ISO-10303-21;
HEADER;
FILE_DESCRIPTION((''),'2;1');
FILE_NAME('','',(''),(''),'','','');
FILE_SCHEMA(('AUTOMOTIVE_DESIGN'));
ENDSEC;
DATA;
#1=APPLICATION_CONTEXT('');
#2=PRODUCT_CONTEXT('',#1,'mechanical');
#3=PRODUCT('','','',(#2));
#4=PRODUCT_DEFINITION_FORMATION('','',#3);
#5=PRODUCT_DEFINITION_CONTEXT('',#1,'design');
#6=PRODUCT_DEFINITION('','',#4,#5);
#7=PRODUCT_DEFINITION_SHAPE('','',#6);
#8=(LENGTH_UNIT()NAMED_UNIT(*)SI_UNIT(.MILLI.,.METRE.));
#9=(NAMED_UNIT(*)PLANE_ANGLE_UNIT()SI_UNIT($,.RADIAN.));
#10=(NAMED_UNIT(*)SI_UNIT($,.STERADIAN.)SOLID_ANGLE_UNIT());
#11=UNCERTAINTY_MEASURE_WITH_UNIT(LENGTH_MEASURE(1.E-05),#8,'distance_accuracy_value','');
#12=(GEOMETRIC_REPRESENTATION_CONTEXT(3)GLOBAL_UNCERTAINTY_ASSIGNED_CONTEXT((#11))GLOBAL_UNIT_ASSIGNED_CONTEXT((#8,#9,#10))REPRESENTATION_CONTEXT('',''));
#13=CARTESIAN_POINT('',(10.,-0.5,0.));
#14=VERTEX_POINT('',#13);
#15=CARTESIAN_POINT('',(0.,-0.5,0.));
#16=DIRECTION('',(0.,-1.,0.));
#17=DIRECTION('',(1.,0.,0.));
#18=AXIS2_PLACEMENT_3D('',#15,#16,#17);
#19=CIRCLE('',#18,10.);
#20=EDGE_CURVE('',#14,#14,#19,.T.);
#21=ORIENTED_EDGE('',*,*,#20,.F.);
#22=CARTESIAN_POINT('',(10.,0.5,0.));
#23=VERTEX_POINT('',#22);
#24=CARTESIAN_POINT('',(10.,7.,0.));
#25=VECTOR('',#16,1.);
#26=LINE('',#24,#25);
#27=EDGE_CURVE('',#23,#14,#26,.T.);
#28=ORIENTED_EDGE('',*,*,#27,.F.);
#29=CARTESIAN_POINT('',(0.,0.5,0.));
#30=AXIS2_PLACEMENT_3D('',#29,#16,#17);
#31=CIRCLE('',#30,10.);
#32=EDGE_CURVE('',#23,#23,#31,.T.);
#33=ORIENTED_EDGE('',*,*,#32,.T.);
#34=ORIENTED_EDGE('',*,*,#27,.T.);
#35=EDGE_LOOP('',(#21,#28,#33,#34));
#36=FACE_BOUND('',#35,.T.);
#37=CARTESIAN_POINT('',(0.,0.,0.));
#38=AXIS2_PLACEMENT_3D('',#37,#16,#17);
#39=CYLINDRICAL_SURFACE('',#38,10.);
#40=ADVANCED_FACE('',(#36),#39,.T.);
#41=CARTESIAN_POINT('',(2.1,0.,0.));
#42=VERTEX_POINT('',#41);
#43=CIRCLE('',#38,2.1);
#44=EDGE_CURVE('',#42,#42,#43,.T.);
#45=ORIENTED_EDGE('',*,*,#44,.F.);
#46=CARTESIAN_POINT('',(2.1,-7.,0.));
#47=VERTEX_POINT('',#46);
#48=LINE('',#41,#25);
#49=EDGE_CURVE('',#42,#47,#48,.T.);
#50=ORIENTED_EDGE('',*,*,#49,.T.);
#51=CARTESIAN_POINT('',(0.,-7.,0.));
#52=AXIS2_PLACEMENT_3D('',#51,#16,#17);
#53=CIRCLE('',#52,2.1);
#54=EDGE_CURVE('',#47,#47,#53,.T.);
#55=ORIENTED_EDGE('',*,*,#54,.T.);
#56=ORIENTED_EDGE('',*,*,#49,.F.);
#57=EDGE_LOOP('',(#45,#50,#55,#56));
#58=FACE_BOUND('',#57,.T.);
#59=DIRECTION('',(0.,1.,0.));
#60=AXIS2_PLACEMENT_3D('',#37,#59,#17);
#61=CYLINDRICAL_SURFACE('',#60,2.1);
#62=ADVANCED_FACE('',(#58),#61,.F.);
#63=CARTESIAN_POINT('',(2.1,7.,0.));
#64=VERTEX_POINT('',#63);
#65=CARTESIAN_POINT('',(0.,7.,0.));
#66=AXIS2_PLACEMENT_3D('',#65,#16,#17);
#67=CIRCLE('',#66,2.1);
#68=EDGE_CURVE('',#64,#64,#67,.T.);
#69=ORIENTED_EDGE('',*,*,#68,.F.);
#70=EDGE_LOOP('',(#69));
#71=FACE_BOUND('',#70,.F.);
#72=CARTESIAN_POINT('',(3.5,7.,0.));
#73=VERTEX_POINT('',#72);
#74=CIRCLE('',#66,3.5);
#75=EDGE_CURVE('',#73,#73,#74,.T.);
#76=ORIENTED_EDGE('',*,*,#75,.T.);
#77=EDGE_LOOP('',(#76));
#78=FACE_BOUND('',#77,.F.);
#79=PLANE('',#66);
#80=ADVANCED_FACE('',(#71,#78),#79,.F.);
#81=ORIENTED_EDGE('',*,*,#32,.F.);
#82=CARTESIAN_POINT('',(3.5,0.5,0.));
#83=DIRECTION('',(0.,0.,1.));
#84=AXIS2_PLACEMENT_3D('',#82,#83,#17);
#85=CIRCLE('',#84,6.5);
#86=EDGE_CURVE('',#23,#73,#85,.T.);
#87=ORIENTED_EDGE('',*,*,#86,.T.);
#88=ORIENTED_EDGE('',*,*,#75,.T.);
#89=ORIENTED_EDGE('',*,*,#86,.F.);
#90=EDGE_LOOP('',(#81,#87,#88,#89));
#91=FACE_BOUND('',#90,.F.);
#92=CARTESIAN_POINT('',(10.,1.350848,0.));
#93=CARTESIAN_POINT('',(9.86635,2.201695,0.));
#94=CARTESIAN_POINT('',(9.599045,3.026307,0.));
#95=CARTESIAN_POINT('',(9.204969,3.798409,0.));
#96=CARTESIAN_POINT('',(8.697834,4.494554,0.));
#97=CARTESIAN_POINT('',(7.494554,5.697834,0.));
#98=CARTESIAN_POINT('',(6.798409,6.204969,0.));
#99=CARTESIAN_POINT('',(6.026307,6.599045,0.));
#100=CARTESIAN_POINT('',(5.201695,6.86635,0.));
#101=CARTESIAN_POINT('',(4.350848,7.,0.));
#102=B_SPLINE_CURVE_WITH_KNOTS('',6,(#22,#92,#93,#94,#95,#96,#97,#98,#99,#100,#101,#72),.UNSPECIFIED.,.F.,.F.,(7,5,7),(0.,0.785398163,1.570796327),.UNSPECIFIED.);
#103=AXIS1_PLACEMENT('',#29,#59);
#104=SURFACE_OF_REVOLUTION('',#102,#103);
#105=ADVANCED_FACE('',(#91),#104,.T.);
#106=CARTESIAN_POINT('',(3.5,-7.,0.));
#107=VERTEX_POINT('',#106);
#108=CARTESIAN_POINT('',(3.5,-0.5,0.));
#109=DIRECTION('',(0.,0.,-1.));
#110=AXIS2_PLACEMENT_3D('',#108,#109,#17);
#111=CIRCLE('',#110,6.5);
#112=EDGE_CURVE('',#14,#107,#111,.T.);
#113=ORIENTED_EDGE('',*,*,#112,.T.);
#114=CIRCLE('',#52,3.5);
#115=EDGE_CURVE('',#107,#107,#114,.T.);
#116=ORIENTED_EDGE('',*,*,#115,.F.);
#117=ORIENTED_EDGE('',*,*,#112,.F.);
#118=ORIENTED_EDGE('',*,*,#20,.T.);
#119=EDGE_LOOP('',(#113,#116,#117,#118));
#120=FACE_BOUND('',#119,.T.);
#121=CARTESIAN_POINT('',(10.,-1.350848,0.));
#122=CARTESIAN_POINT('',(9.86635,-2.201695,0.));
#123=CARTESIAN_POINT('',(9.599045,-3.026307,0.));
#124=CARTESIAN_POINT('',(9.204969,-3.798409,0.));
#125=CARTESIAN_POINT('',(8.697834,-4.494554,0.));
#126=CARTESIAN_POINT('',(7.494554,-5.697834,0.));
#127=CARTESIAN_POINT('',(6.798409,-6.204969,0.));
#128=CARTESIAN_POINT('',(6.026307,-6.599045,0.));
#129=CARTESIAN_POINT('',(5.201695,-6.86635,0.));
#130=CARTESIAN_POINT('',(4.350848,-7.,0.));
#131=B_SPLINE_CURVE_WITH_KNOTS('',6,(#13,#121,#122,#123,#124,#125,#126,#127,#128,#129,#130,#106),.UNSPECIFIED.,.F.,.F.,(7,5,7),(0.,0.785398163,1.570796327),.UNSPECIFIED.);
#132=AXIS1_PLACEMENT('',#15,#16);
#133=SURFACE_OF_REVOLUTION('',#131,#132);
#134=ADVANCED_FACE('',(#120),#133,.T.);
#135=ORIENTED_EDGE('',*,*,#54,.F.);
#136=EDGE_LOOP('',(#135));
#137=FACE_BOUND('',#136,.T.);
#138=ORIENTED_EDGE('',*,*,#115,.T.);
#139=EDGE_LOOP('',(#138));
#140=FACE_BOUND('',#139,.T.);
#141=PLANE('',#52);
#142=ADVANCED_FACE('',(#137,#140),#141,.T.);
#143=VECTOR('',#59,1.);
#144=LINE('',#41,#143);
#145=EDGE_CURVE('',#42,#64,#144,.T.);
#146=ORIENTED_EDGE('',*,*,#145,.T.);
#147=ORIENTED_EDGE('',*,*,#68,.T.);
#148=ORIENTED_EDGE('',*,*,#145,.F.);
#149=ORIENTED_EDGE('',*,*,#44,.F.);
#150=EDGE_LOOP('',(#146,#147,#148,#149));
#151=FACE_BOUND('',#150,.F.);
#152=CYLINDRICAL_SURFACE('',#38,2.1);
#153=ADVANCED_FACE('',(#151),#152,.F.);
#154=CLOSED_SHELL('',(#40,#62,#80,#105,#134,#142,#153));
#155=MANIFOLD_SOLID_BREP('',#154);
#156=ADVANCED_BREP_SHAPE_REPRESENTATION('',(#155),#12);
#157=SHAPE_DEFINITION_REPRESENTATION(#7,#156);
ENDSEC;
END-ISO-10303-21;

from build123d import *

# Parameters (mm, degrees)
F0_R          = 10
F0_R_2        = 2.1
F2_DEPTH      = 7
F2_DEPTH_BACK = 7
F3_R          = 6.5


# Not quite as in the source:
# - the program builds the solid bodies; features that only make, move or delete a surface that nothing else refers to are left out


with BuildPart() as f2:
    # F0 (on Front) → F2 (new body, two sides)
    with BuildSketch(Plane.XZ) as f2_sk:
        Circle(F0_R)
        Circle(F0_R_2, mode=Mode.SUBTRACT)
    extrude(amount=F2_DEPTH)
    extrude(f2_sk.sketch, amount=-F2_DEPTH_BACK)

    # F3
    f3_edges = [f2.edges().sort_by_distance(p)[0] for p in [
        (-10, -7, 0),
        (-10, 7, 0),
    ]]
    fillet(f3_edges, radius=F3_R)


solid = f2.part
